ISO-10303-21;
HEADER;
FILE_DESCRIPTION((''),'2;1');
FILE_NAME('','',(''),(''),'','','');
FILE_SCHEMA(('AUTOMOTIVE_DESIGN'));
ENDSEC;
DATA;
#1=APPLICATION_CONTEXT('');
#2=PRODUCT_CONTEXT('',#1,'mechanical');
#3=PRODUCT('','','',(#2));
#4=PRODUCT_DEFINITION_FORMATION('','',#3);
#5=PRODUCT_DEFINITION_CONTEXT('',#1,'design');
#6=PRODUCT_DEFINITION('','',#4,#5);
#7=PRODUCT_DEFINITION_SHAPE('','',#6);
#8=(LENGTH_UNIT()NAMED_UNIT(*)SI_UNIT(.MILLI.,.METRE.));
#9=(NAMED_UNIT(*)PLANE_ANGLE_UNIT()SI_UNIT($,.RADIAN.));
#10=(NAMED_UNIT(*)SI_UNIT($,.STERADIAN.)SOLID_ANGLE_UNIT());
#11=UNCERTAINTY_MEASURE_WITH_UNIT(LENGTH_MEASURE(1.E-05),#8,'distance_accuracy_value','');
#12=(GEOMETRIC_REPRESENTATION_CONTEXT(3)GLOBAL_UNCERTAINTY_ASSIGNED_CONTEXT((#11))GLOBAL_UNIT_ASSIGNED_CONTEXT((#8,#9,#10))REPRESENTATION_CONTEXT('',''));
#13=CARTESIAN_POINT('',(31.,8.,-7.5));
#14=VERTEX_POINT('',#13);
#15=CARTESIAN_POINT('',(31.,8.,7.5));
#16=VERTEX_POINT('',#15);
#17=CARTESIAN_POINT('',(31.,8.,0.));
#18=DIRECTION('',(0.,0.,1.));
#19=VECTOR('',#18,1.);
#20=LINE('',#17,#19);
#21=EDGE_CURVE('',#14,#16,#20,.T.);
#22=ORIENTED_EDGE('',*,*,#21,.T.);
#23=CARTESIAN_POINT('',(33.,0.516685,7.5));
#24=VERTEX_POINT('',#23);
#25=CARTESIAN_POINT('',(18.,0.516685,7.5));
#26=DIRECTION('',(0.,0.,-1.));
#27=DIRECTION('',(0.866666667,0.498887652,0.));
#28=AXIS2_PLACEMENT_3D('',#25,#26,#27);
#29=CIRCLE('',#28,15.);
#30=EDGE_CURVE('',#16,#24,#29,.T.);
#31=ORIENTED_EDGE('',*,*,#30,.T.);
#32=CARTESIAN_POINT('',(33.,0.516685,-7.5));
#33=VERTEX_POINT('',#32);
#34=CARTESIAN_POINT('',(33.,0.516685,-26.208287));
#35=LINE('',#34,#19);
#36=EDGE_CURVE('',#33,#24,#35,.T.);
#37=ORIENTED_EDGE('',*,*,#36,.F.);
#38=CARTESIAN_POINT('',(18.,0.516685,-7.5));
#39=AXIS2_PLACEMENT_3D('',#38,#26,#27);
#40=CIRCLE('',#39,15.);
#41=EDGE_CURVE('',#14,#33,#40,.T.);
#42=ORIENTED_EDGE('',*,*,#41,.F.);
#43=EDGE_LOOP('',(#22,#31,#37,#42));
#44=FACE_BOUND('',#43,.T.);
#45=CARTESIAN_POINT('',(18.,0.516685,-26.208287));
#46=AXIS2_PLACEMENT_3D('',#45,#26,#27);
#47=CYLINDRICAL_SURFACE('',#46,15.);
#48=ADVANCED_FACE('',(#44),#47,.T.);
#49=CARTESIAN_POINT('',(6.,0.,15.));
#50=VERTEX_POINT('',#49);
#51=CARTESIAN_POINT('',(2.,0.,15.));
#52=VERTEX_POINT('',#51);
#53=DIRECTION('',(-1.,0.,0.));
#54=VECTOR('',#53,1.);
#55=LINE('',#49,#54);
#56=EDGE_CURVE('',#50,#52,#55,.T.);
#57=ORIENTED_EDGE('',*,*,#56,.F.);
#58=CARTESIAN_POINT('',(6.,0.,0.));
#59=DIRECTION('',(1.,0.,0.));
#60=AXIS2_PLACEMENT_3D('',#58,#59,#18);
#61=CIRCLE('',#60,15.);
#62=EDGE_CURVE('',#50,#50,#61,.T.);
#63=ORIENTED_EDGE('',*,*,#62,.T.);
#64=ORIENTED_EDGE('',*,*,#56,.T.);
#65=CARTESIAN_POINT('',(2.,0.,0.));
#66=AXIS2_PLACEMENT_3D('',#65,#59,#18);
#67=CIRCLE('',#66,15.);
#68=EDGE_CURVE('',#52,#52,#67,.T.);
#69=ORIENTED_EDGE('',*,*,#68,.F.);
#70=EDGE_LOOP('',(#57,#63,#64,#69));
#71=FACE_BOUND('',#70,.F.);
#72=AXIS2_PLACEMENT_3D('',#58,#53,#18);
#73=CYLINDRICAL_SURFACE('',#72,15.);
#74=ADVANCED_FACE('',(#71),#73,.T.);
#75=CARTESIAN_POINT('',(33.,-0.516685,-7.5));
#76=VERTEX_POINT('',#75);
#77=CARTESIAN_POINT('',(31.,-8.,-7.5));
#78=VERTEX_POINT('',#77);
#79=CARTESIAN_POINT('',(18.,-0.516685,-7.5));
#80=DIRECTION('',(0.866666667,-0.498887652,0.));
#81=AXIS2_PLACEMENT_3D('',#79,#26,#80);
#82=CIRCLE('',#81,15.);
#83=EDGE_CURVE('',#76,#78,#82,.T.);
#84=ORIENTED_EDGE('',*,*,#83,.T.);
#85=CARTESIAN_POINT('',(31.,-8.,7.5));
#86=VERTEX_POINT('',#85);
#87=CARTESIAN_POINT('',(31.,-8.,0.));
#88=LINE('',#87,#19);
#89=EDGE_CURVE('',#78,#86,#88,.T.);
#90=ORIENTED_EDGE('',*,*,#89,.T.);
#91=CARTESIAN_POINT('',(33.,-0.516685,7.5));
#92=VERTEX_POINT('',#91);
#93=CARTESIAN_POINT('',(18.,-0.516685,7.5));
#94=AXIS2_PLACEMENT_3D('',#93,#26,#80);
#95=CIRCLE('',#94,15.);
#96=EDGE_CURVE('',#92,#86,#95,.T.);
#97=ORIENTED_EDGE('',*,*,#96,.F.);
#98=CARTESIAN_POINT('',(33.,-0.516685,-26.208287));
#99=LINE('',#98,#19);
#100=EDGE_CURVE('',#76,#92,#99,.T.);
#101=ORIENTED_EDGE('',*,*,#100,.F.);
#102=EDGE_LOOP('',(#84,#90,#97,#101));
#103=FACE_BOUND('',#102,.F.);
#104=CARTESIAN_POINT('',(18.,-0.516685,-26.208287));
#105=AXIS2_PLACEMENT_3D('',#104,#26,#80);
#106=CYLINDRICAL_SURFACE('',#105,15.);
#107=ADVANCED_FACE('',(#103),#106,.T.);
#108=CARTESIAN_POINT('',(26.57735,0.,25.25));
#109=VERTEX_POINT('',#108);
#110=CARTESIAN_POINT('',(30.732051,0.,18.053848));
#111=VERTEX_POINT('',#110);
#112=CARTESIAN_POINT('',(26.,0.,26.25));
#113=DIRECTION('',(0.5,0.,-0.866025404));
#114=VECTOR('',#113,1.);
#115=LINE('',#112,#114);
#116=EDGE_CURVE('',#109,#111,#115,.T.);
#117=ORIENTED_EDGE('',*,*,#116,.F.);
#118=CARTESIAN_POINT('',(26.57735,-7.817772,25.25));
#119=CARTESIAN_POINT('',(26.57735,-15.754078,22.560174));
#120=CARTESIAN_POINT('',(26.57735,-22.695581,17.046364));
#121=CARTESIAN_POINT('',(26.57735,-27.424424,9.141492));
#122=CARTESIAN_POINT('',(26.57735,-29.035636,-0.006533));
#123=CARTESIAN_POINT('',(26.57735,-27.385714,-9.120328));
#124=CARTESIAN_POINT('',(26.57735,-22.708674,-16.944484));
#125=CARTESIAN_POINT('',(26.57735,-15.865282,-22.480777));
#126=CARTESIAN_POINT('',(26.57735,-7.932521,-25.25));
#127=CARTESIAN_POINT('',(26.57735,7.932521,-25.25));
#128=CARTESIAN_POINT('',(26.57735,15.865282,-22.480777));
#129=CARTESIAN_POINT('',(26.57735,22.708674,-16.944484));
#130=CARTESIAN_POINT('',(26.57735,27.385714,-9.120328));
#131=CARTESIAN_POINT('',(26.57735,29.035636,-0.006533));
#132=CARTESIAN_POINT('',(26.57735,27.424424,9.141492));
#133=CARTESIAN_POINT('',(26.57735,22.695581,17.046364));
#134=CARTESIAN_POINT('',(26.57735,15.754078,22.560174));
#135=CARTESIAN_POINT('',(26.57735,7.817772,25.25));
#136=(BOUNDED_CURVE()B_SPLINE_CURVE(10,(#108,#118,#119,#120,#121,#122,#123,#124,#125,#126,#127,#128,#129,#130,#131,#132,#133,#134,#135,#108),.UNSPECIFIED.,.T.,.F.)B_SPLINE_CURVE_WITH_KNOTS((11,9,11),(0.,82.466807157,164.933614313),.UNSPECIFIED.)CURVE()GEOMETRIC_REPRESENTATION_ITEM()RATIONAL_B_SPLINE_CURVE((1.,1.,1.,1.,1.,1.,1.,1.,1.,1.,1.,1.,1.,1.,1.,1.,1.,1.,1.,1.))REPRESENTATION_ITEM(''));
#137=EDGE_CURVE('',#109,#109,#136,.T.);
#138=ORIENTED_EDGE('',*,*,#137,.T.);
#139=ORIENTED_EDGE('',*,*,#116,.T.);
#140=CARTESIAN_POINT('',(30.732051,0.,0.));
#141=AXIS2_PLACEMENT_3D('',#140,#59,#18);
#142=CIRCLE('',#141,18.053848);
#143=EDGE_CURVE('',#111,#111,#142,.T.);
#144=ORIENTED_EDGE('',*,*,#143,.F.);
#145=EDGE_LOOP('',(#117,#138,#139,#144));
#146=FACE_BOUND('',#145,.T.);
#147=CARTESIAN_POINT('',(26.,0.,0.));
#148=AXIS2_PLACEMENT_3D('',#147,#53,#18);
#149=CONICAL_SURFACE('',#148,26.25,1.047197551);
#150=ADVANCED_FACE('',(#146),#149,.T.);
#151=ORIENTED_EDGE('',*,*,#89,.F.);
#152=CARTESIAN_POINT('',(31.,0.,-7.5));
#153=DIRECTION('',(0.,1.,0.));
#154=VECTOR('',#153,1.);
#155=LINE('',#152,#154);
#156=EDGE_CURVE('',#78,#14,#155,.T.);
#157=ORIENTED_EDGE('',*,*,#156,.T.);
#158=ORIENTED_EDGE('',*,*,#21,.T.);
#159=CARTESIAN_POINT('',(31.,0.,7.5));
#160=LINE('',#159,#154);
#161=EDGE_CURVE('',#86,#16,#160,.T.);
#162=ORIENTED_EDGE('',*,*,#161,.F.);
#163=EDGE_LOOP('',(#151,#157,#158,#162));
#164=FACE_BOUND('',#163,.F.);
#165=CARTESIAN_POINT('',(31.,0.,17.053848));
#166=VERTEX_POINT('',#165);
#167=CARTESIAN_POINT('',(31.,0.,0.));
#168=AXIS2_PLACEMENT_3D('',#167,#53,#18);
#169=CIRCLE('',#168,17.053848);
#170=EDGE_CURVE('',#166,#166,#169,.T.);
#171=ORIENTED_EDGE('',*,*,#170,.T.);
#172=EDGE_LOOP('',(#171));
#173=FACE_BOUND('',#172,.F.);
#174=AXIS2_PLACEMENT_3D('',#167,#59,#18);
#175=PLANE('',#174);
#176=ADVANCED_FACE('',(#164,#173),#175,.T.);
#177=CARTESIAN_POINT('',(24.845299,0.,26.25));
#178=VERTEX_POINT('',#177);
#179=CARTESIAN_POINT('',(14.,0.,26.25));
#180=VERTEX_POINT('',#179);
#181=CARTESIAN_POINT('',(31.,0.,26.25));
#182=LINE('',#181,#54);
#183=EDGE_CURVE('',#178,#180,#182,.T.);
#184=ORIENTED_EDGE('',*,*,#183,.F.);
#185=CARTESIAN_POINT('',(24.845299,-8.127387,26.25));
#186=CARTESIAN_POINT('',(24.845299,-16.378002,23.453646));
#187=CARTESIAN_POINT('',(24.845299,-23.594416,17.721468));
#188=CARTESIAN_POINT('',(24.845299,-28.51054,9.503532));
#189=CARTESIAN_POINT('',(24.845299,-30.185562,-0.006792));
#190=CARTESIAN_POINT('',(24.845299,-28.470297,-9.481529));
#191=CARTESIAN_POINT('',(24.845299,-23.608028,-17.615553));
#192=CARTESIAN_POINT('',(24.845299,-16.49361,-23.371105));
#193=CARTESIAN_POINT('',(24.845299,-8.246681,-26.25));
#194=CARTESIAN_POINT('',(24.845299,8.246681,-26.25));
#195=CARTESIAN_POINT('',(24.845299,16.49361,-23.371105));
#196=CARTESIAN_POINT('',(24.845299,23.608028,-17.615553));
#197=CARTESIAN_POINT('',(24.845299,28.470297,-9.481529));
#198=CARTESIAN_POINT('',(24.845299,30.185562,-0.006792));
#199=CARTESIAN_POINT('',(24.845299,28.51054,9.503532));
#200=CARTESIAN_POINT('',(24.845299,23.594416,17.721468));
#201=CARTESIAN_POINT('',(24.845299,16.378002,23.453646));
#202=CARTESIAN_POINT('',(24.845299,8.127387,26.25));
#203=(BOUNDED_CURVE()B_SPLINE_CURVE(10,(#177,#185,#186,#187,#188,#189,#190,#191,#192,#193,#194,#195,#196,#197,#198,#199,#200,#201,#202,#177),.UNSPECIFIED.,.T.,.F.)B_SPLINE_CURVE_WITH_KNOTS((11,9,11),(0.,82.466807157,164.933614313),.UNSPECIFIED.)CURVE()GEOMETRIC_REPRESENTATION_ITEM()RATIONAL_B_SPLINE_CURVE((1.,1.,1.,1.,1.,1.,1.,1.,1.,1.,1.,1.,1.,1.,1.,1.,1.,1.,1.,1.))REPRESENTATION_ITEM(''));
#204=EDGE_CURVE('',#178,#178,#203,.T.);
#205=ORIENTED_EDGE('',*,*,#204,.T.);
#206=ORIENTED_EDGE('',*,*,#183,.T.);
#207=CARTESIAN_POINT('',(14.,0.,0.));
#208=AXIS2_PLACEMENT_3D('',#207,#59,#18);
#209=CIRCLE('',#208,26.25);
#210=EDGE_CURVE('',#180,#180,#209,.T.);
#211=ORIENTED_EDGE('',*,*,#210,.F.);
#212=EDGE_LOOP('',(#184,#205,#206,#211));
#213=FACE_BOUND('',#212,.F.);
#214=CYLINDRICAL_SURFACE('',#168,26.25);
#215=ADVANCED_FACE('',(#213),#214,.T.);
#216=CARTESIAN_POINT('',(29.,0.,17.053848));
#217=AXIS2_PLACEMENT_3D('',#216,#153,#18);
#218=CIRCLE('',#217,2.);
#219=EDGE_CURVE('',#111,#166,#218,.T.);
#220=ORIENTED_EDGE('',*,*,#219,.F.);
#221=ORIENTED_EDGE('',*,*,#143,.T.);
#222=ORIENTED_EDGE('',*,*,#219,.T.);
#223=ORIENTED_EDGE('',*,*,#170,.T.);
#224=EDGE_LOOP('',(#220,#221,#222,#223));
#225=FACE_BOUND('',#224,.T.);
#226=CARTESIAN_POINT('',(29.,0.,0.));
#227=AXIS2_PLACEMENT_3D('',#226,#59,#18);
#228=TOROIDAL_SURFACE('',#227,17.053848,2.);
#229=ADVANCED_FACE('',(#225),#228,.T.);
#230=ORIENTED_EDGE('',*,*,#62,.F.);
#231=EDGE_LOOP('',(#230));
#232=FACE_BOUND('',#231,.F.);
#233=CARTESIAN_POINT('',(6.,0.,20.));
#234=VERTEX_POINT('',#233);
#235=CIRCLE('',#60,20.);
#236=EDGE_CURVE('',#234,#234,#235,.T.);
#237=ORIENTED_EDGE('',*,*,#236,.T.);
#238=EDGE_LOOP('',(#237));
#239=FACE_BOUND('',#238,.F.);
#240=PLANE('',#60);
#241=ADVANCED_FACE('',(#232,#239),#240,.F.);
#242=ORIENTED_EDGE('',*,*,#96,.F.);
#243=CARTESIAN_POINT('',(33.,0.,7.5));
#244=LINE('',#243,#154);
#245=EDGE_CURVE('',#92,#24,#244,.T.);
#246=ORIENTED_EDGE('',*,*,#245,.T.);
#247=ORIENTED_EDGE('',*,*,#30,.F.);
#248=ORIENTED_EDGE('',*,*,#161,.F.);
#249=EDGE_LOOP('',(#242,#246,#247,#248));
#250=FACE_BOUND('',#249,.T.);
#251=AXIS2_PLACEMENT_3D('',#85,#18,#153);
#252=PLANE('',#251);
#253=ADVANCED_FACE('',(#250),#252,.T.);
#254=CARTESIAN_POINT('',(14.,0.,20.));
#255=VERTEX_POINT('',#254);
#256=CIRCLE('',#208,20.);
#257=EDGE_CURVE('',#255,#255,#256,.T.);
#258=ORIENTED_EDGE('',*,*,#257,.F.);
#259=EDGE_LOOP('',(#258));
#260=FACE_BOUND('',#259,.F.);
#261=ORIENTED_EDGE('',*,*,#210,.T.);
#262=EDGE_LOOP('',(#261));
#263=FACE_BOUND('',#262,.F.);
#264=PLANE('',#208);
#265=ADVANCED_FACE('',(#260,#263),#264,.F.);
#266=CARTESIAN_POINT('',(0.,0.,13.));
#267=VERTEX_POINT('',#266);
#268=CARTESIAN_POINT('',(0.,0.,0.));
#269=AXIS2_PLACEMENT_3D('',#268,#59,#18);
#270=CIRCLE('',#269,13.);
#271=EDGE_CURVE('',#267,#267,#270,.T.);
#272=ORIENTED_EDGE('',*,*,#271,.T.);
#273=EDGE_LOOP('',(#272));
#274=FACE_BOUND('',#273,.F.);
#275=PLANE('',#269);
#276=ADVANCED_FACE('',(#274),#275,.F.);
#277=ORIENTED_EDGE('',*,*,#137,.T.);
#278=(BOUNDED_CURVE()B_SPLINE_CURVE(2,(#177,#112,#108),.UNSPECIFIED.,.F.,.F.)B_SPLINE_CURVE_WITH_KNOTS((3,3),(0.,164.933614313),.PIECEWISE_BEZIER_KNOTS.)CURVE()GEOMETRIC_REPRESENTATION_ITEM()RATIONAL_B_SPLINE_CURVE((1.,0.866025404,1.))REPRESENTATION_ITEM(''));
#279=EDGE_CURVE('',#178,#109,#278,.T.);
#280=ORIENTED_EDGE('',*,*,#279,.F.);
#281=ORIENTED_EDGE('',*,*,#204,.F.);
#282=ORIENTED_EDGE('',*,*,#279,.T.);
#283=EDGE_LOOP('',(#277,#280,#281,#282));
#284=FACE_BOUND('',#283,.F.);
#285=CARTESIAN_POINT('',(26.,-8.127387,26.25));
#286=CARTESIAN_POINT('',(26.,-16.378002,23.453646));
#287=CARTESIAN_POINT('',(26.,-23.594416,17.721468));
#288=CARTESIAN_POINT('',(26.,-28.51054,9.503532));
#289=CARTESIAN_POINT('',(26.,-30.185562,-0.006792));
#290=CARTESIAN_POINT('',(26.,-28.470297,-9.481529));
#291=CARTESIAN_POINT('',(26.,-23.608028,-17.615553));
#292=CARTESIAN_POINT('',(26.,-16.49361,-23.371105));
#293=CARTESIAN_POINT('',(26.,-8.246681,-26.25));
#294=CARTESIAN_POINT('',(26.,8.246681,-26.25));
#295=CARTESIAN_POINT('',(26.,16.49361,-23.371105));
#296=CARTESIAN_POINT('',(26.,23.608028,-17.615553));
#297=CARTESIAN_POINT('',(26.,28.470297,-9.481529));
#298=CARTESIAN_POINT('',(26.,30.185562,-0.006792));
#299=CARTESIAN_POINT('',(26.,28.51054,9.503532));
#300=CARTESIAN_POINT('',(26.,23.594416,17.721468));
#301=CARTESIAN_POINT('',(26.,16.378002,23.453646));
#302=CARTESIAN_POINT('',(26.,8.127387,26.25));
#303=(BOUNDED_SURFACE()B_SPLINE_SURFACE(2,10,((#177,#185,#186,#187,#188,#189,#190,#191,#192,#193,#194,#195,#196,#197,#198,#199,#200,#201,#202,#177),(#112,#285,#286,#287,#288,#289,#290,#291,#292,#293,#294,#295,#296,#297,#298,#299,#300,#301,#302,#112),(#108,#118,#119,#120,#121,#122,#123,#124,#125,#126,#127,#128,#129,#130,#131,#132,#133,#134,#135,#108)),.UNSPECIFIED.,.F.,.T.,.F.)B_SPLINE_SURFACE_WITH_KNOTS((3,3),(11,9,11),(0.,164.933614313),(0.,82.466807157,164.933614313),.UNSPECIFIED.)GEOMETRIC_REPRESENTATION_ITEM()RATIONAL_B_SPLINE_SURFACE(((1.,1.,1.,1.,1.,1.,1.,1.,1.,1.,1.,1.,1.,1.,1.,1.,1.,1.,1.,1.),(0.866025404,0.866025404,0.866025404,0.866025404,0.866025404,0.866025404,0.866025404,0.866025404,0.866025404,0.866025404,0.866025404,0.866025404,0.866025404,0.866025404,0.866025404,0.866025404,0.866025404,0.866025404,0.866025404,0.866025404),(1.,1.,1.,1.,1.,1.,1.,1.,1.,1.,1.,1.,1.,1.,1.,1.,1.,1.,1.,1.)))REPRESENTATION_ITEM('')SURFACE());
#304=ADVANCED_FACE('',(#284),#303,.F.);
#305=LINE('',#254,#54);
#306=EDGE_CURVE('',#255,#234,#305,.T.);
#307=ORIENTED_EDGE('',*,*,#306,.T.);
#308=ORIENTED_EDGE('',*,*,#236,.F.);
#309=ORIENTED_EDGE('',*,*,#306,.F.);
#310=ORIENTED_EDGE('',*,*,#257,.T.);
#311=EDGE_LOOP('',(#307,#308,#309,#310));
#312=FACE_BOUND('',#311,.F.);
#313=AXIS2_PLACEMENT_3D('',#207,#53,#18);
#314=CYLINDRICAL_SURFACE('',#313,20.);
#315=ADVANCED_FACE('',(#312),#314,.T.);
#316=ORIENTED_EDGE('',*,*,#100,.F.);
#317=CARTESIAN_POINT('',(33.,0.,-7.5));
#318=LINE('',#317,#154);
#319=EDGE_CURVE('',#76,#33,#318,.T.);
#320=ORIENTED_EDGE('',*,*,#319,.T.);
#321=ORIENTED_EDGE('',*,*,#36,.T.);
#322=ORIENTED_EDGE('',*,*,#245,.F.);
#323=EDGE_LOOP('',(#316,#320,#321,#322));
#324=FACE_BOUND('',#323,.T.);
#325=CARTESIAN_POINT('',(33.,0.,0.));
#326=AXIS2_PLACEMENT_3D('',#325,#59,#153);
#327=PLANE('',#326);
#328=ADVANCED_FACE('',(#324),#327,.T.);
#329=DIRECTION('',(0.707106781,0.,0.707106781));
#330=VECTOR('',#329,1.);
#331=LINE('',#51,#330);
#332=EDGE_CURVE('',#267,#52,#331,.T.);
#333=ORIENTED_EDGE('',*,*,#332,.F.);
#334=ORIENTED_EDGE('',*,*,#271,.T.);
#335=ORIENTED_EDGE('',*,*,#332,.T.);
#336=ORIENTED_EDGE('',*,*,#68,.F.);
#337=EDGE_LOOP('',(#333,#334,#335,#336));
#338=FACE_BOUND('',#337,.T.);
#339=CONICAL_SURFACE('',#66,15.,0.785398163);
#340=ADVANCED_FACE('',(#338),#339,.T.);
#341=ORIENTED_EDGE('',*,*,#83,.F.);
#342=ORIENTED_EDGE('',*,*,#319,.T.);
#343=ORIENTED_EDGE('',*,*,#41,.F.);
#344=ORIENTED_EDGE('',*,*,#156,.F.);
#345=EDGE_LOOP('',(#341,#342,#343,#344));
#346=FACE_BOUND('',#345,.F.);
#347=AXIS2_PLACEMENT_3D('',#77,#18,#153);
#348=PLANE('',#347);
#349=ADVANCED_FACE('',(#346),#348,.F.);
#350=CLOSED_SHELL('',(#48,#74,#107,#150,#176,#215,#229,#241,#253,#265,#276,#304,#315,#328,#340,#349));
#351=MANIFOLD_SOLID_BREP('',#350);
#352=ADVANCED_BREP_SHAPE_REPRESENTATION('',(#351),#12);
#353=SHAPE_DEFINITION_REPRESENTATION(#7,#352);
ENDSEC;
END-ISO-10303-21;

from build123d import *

# Parameters (mm, degrees)
F3_SIZE     = 2
F4_SIZE2    = 8.6602540378
F4_SIZE     = 5
F5_R        = 2
F6_W        = 16
F6_H        = 15
F7_DEPTH    = 2
F8_T1_DEPTH = 52.4165738677


# Not quite as in the source:
# - a fillet or chamfer that OpenCascade refuses, or shapes differently, is made with other operations: its cross-section is extruded or revolved along the edge and cut away or added


with BuildPart() as f2:
    # F0 (on Front) → F2 (revolve)
    with BuildSketch(Plane.XZ):
        Polygon((0, 15), (0, 0), (31, 0), (31, 26.25), (14, 26.25), (14, 20), (6, 20), (6, 15), align=None)
    revolve(axis=Axis((43.7085926533, 0, 0), (1, 0, 0)))

    # F3
    f3_edges = [f2.edges().sort_by_distance(p)[0] for p in [
        (0, 0, -15),
    ]]
    chamfer(f3_edges, length=F3_SIZE)

    # F4
    f4_edges = [f2.edges().sort_by_distance(p)[0] for p in [
        (31, 0, -26.25),
    ]]
    chamfer(f4_edges, length=F4_SIZE, length2=F4_SIZE2)

    # F5
    f5_edges = [f2.edges().sort_by_distance(p)[0] for p in [
        (26, 0, -26.25),
        (31, 0, -17.589746),
    ]]
    fillet(f5_edges, radius=F5_R)

    # F6 (on face) → F7 (join)
    with BuildSketch(Plane.YZ.offset(31)):
        Rectangle(F6_W, F6_H)
    extrude(amount=F7_DEPTH)

    # F8: fillet of radius 15 on 2 edges, made by hand

    # F8_s2 → F8_t1 (cut)
    with BuildSketch(Plane.XY.offset(-26.2082869339)):
        with BuildLine():
            ThreePointArc((31, -8), (32.4913767462, -4.3896685727), (33, -0.5166852265))
            Line((33, -0.5166852265), (33, -8))
            Line((33, -8), (31, -8))
        make_face()
        with BuildLine():
            ThreePointArc((31, 8), (32.4913767462, 4.3896685727), (33, 0.5166852265))
            Line((33, 0.5166852265), (33, 8))
            Line((33, 8), (31, 8))
        make_face()
    extrude(amount=F8_T1_DEPTH, mode=Mode.SUBTRACT)


solid = f2.part
